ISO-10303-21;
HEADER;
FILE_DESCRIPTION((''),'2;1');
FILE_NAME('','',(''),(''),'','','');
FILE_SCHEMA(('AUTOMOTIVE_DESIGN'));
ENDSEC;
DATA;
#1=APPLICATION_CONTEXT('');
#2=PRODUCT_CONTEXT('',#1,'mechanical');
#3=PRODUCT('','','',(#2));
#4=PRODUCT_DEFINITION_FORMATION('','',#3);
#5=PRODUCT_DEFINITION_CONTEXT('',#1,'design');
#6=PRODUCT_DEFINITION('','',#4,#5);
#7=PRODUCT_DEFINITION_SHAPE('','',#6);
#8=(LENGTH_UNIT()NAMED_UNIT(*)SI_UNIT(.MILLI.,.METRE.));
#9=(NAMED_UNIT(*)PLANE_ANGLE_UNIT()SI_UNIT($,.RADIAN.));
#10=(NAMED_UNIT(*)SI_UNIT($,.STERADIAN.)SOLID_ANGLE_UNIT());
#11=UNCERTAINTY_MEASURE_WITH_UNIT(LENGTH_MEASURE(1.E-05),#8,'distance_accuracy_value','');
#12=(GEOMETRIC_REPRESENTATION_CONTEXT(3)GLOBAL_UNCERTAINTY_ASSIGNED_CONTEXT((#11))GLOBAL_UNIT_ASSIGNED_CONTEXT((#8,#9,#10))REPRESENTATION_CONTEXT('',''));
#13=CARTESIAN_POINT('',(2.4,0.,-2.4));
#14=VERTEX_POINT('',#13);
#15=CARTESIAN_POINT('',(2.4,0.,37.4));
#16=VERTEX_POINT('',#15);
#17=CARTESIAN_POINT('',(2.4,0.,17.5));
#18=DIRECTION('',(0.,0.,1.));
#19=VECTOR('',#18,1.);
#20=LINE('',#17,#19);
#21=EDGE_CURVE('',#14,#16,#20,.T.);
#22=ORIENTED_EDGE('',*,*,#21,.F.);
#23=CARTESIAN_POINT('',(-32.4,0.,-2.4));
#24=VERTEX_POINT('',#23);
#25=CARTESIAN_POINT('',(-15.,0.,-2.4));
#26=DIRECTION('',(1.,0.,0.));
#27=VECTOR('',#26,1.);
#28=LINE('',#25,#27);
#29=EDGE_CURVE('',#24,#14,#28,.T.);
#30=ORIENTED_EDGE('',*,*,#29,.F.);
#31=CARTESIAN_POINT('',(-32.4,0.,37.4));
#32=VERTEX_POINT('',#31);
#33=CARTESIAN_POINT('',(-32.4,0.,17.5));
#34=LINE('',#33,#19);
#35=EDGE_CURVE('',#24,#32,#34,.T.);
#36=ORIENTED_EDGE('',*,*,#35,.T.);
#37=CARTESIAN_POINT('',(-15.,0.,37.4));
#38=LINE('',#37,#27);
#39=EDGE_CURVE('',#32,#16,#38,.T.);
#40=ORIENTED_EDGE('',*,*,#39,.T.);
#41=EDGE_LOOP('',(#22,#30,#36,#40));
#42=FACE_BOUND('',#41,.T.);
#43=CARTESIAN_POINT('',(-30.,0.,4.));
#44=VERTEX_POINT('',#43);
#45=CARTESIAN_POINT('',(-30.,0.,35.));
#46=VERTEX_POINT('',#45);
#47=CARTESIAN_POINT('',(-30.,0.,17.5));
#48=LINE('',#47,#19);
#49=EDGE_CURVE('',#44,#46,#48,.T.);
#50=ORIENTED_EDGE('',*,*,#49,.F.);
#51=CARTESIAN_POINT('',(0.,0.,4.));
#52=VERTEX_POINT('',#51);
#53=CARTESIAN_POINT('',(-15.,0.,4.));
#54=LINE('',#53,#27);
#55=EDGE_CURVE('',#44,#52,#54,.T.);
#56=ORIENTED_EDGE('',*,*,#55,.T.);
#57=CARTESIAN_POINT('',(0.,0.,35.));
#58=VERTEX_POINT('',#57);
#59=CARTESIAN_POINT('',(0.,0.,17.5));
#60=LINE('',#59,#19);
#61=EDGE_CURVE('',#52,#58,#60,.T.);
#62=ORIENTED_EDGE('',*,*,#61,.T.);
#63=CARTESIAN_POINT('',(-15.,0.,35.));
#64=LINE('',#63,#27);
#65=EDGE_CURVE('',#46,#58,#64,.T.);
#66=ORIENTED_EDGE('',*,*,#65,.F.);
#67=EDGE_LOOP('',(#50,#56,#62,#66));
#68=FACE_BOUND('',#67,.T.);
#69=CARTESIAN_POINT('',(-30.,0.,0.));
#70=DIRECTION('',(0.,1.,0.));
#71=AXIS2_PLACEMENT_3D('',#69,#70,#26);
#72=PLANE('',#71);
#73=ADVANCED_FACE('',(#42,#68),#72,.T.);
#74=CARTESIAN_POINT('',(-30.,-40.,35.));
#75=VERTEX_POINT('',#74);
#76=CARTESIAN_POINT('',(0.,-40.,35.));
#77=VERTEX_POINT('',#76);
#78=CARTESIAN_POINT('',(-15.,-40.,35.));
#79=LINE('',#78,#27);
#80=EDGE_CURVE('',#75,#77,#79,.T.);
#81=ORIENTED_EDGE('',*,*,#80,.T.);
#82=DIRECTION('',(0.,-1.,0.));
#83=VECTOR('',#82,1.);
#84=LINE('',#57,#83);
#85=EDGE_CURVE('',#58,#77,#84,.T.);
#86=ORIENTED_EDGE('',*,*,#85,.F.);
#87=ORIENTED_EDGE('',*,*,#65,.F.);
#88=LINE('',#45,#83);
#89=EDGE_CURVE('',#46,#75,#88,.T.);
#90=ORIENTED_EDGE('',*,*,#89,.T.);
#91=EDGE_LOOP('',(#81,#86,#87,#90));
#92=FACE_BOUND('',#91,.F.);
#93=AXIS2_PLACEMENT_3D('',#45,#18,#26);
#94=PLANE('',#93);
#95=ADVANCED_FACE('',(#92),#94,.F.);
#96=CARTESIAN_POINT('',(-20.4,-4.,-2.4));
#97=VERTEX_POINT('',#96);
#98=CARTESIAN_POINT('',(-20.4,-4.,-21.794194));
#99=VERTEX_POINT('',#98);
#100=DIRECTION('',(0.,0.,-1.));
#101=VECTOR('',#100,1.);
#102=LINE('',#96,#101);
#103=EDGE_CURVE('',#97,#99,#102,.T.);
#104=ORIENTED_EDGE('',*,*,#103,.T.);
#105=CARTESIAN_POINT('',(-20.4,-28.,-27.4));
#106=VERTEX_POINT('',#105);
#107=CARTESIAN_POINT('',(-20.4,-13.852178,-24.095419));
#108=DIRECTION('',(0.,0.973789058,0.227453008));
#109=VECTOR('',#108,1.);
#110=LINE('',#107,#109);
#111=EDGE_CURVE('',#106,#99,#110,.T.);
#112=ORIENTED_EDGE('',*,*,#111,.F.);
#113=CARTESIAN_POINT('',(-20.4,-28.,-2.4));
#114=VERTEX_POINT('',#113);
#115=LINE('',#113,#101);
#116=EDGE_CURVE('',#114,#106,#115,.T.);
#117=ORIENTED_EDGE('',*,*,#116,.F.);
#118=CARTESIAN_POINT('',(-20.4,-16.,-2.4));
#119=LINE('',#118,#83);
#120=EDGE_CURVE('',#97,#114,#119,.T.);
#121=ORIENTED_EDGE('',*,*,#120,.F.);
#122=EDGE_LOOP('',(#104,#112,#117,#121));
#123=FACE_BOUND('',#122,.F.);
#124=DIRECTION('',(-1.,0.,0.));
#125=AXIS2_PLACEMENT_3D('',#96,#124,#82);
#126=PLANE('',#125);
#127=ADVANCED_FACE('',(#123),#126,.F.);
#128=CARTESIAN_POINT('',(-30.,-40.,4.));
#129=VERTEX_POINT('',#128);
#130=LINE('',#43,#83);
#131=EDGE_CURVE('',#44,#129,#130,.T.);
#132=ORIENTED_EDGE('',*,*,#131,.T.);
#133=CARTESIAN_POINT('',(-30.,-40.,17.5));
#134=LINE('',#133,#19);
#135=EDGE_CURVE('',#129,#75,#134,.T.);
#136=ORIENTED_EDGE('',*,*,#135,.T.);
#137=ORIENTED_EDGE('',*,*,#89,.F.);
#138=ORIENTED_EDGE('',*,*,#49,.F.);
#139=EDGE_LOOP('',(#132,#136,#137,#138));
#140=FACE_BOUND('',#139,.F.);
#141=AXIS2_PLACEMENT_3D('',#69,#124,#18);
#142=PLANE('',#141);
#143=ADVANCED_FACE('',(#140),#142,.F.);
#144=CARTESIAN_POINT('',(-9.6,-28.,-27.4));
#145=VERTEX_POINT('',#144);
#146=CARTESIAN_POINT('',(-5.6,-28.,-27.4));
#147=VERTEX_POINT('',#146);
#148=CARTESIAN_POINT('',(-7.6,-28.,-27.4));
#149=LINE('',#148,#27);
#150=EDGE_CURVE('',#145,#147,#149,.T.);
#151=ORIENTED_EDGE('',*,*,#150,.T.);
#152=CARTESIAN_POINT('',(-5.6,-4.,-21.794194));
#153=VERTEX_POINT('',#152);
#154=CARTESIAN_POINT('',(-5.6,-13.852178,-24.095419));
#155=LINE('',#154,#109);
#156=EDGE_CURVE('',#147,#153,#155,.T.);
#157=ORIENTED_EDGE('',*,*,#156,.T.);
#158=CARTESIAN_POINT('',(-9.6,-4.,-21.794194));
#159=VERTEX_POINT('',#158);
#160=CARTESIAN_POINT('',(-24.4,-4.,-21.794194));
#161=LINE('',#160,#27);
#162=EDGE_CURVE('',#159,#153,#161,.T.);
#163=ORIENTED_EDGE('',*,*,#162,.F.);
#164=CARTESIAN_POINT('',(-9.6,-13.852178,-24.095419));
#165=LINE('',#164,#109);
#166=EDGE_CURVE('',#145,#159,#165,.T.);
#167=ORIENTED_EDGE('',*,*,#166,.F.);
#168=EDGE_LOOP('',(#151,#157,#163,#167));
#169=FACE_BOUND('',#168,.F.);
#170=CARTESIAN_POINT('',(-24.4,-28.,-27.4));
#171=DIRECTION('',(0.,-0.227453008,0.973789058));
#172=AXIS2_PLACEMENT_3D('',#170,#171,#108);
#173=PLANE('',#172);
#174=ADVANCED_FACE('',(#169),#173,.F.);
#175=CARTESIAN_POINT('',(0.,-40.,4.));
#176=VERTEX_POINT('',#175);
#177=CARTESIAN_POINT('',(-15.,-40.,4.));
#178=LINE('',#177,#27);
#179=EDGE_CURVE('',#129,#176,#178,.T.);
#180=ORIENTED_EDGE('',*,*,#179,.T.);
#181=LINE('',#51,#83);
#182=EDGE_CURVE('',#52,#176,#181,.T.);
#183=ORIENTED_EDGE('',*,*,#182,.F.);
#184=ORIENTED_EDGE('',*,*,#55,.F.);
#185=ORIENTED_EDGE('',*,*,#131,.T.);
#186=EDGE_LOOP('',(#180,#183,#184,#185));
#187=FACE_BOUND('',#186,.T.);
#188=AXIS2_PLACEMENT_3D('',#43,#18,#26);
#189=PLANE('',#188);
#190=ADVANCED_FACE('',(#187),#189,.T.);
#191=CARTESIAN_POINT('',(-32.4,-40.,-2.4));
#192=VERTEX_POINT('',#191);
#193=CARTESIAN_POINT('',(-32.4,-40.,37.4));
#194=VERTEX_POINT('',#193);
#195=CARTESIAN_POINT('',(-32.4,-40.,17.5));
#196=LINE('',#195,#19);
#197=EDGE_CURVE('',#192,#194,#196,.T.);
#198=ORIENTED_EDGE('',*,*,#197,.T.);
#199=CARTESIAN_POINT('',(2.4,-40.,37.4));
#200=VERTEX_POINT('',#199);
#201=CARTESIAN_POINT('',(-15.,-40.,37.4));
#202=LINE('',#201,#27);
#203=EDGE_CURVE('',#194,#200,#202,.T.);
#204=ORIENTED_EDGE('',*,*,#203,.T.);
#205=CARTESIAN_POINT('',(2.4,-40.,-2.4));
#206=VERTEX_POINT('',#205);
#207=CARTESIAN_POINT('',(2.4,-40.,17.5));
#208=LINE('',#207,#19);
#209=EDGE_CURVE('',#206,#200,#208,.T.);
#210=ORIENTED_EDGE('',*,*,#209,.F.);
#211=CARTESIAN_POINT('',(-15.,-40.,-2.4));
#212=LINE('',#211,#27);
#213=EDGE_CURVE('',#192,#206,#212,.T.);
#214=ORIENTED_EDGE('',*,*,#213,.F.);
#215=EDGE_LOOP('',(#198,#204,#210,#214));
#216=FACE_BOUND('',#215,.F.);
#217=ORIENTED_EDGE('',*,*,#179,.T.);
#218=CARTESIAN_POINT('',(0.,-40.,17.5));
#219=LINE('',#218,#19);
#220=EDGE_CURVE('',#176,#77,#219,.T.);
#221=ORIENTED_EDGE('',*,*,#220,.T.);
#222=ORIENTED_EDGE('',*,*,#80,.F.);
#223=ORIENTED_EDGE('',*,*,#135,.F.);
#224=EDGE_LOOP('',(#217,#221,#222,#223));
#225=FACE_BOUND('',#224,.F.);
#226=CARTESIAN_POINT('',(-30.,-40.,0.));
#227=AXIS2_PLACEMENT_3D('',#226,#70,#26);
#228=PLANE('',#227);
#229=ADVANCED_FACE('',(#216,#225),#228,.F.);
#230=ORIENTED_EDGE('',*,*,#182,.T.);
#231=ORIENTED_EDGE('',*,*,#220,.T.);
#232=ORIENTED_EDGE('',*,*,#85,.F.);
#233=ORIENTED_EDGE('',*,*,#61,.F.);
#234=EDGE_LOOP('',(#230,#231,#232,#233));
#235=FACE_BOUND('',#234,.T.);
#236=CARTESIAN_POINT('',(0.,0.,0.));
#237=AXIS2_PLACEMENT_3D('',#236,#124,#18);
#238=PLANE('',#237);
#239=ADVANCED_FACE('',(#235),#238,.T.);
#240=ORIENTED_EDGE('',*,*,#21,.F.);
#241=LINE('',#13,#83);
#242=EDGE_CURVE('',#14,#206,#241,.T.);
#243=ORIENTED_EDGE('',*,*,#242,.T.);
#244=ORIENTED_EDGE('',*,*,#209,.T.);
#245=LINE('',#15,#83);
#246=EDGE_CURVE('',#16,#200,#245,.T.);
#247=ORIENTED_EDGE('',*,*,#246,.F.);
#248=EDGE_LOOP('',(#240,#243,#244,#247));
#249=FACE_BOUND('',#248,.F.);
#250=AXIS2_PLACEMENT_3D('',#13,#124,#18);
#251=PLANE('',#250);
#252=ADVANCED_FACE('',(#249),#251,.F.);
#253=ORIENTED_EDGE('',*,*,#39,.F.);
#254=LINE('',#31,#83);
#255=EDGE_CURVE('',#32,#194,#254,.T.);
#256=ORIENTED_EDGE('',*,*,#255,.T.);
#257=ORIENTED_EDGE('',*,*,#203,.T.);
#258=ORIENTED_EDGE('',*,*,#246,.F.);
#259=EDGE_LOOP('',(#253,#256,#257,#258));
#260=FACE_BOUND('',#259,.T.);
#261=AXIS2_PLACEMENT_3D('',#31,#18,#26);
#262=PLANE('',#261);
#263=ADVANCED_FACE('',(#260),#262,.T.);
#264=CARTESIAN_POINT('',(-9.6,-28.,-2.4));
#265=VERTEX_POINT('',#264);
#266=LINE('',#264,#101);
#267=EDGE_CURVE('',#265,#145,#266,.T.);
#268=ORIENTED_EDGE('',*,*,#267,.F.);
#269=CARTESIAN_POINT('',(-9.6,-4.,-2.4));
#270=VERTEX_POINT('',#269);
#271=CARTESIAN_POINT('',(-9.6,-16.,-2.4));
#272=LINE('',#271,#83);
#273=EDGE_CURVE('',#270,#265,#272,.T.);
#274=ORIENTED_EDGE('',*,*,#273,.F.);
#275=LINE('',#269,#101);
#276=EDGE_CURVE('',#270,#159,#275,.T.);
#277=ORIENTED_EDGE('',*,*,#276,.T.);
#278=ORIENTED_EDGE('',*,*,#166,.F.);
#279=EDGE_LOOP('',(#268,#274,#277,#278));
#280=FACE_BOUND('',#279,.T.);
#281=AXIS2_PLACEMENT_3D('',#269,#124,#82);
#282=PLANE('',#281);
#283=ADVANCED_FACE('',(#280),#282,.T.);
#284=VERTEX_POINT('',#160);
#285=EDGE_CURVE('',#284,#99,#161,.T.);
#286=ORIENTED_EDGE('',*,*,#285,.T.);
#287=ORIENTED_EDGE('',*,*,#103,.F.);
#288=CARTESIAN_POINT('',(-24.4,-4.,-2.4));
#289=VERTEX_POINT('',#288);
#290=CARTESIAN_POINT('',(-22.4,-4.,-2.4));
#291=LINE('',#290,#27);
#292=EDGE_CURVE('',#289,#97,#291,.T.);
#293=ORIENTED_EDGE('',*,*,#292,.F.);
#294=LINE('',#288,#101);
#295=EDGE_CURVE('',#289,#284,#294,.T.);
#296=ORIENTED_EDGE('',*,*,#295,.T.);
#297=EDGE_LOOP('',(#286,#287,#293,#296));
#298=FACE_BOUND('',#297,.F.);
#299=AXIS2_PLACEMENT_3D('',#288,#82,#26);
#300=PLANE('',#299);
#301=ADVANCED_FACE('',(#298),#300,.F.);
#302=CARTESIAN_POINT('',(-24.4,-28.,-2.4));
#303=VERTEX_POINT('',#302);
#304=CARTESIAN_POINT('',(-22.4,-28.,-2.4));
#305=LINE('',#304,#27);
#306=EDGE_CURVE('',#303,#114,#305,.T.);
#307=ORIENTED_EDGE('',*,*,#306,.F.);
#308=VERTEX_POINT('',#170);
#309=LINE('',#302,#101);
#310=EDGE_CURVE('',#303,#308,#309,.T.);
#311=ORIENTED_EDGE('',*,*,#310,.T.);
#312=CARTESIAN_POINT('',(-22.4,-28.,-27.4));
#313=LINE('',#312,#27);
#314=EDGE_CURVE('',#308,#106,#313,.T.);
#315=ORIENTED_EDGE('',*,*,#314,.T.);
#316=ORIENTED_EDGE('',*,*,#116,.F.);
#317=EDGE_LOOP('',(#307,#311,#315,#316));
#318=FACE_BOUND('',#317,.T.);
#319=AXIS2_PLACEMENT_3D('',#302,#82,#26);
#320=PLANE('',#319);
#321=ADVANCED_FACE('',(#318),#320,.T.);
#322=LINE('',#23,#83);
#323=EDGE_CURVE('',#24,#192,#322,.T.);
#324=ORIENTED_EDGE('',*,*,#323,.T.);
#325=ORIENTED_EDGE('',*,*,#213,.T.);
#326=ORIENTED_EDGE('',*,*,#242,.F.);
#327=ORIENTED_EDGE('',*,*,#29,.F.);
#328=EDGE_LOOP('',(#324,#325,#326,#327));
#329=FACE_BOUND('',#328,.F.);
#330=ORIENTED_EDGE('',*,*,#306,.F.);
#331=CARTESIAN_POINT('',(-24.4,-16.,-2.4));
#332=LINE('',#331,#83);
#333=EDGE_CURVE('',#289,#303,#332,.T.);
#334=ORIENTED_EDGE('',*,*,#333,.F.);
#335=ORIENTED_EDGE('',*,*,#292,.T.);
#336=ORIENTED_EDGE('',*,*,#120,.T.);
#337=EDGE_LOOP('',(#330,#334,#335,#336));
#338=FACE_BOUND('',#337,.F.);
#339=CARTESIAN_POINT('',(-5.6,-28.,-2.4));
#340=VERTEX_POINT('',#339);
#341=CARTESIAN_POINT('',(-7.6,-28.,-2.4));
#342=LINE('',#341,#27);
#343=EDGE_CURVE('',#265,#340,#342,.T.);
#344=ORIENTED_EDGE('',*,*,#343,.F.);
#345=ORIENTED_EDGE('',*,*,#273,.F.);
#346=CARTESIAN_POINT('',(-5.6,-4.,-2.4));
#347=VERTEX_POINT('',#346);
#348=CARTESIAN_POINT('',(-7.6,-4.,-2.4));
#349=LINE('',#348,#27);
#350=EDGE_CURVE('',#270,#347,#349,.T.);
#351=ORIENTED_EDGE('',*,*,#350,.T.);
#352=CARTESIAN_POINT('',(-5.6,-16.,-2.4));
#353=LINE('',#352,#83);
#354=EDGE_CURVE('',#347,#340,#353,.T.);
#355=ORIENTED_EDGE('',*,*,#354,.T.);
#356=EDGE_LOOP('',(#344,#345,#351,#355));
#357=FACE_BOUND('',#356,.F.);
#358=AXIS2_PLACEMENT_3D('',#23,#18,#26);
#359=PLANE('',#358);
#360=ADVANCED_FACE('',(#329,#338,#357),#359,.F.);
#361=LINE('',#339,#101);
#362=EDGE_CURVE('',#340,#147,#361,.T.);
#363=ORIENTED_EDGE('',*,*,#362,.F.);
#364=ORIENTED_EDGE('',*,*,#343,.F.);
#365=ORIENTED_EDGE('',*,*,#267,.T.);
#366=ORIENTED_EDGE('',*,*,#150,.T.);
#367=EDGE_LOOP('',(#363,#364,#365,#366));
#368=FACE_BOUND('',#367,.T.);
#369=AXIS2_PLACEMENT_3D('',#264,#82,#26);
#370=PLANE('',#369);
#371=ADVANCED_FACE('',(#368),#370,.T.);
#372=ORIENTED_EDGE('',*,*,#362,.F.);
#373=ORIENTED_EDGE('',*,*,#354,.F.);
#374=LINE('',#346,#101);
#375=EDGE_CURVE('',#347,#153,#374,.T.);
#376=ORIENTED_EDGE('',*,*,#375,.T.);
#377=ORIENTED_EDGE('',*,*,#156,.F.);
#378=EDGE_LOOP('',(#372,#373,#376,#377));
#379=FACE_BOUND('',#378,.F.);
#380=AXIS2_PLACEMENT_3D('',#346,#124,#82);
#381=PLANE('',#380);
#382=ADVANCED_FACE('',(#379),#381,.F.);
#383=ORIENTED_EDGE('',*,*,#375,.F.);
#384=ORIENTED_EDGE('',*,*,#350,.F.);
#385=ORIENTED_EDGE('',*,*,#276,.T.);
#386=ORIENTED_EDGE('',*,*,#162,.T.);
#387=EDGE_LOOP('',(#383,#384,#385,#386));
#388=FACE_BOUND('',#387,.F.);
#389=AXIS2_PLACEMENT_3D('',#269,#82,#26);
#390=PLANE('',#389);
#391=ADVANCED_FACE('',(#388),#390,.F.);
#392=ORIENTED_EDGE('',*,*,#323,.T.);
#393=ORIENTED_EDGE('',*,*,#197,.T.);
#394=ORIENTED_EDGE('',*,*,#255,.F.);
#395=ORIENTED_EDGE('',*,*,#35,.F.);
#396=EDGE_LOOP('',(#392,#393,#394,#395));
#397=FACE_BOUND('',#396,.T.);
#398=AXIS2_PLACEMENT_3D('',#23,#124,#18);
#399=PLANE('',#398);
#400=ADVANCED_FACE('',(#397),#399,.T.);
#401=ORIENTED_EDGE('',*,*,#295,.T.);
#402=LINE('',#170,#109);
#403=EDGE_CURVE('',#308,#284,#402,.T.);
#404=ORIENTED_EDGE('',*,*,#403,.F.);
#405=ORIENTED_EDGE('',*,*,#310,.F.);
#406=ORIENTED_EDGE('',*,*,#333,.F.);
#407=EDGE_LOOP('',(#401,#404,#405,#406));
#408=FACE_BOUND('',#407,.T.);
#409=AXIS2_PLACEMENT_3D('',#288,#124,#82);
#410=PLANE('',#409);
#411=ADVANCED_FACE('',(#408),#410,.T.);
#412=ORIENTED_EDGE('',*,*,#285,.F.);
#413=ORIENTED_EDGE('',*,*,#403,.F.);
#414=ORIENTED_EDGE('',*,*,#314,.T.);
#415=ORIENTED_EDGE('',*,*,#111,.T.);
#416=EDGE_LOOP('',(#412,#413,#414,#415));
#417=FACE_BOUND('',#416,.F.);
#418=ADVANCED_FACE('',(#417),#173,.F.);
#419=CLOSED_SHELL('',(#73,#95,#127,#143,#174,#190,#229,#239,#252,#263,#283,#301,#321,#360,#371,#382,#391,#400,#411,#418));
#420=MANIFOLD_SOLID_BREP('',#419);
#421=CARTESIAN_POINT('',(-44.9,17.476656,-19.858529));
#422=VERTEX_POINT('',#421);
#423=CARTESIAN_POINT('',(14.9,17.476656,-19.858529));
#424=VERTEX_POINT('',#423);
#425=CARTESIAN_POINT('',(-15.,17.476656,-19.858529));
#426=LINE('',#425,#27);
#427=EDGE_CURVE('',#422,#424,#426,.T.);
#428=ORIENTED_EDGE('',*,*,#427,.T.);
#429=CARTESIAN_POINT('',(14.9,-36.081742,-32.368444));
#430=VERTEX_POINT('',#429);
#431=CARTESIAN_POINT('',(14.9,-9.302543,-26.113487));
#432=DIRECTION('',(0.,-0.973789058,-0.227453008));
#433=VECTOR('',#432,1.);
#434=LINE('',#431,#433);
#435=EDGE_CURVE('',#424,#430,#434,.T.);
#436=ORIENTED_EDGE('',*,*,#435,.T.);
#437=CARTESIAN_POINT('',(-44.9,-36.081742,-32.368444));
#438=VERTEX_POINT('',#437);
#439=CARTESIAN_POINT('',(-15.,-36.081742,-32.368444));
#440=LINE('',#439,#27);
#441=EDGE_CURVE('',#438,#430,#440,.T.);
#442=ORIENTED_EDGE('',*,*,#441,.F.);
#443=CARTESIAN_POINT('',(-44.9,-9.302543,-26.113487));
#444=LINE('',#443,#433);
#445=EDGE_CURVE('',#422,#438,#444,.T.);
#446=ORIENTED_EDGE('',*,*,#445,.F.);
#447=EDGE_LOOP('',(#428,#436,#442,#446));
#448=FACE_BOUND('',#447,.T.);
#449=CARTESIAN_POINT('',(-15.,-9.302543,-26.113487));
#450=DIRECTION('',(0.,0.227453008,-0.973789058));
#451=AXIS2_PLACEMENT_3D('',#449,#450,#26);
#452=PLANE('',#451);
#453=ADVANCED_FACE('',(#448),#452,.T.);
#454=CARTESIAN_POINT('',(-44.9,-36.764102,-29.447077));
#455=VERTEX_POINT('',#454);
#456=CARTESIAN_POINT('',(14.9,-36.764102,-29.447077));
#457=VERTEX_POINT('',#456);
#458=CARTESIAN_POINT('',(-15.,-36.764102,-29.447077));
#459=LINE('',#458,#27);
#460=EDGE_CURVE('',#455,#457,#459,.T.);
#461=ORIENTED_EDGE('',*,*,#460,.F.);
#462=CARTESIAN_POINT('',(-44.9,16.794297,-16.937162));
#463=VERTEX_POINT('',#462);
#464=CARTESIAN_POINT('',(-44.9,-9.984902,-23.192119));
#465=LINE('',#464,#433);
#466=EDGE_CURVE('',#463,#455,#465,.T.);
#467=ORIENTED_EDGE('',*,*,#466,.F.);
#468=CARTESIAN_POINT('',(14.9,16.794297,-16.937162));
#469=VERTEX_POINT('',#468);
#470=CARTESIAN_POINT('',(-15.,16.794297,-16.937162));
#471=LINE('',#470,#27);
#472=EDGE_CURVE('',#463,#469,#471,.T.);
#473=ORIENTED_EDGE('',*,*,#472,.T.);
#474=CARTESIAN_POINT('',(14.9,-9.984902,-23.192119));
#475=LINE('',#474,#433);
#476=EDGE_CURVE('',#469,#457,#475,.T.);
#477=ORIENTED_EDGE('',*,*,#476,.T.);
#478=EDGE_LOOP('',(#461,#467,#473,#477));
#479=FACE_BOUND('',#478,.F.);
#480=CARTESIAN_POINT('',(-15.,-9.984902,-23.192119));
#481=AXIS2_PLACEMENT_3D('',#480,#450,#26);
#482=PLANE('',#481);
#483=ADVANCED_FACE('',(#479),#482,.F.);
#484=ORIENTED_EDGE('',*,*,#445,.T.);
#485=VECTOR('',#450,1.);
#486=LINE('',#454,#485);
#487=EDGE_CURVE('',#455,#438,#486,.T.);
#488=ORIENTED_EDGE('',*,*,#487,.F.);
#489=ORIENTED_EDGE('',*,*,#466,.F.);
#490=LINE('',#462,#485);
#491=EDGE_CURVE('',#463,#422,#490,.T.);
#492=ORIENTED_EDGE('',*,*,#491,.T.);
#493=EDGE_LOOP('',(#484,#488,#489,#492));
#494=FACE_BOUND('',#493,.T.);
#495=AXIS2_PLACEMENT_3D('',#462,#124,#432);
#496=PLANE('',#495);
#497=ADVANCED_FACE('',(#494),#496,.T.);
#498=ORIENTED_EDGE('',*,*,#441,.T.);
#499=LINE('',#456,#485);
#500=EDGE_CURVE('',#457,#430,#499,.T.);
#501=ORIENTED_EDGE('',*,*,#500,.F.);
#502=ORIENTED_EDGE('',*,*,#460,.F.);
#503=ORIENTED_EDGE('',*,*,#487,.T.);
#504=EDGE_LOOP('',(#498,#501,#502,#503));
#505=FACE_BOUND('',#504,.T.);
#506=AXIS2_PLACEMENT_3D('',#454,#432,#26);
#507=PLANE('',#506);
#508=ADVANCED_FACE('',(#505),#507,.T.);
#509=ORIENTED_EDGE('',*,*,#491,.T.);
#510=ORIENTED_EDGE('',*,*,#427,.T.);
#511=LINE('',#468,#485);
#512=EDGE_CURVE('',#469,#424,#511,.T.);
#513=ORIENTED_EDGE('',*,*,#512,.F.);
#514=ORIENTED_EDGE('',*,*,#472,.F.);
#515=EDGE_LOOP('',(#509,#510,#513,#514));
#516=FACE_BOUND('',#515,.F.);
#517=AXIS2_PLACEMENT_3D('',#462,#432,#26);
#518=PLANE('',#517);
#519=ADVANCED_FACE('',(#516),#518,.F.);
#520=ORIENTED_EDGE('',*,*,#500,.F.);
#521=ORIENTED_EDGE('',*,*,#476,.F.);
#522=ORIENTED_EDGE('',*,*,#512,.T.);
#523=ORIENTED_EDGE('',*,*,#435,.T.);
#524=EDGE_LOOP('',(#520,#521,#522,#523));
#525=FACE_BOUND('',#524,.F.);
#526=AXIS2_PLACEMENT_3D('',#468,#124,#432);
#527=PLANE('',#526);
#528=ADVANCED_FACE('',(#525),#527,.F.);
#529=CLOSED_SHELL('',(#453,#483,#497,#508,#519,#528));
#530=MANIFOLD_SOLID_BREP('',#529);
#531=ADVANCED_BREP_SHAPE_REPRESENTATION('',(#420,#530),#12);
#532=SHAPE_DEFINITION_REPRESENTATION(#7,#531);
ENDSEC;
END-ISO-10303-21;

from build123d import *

# Parameters (mm, degrees)
F0_W     = 34.8
F0_H     = 39.8
F0_W_2   = 30
F0_H_2   = 35
F1_DEPTH = 40
F2_W     = 4
F2_H     = 24
F3_DEPTH = 25
F5_DEPTH = 25
F6_DEPTH = 4
F7_W     = 59.8
F7_H     = 55
F7_W_2   = 4
F7_H_2   = 24.645994744
F8_DEPTH = 3


with BuildPart() as f1:
    # F0 (on Front) → F1 (new body)
    with BuildSketch(Plane.XZ):
        with Locations((-15, 17.5)):
            Rectangle(F0_W, F0_H)
        with Locations((-15, 17.5)):
            Rectangle(F0_W_2, F0_H_2, mode=Mode.SUBTRACT)
    extrude(amount=F1_DEPTH)

    # F2 (on face) → F3 (join)
    with BuildSketch(Plane(origin=(0, 0, -2.4), x_dir=(1, 0, 0), z_dir=(0, 0, -1))):
        with Locations((-22.4, 16)):
            Rectangle(F2_W, F2_H)
        with Locations((-7.6, 16)):
            Rectangle(F2_W, F2_H)
    extrude(amount=F3_DEPTH)

    # F4 (on face) → F5 (cut)
    with BuildSketch(Plane(origin=(-24.4, 0, 0), x_dir=(0, -1, 0), z_dir=(-1, 0, 0))):
        Polygon((4, -27.4), (28, -27.4), (4, -21.7941943556), align=None)
    extrude(amount=-F5_DEPTH, mode=Mode.SUBTRACT)

    # F6 (add): a face of the model
    f6_faces = [f1.faces().sort_by_distance(p)[0] for p in [
        (-15, -20, 0),
    ]]
    extrude(f6_faces, amount=F6_DEPTH)


with BuildPart() as f8:
    # F7 (on face) → F8 (new body)
    with BuildSketch(Plane(origin=(0, 4.6202838785, -19.7807095213), x_dir=(1, 0, 0), z_dir=(0, 0.2274530082, -0.9737890578))):
        with Locations((-15, 14.9983060425)):
            Rectangle(F7_W, F7_H)
        with Locations((-22.4, 21.1753086704)):
            Rectangle(F7_W_2, F7_H_2, mode=Mode.SUBTRACT)
        with Locations((-22.4, 21.1753086704)):
            Rectangle(F7_W_2, F7_H_2)
    extrude(amount=F8_DEPTH)


solid = Compound([f1.part, f8.part])
